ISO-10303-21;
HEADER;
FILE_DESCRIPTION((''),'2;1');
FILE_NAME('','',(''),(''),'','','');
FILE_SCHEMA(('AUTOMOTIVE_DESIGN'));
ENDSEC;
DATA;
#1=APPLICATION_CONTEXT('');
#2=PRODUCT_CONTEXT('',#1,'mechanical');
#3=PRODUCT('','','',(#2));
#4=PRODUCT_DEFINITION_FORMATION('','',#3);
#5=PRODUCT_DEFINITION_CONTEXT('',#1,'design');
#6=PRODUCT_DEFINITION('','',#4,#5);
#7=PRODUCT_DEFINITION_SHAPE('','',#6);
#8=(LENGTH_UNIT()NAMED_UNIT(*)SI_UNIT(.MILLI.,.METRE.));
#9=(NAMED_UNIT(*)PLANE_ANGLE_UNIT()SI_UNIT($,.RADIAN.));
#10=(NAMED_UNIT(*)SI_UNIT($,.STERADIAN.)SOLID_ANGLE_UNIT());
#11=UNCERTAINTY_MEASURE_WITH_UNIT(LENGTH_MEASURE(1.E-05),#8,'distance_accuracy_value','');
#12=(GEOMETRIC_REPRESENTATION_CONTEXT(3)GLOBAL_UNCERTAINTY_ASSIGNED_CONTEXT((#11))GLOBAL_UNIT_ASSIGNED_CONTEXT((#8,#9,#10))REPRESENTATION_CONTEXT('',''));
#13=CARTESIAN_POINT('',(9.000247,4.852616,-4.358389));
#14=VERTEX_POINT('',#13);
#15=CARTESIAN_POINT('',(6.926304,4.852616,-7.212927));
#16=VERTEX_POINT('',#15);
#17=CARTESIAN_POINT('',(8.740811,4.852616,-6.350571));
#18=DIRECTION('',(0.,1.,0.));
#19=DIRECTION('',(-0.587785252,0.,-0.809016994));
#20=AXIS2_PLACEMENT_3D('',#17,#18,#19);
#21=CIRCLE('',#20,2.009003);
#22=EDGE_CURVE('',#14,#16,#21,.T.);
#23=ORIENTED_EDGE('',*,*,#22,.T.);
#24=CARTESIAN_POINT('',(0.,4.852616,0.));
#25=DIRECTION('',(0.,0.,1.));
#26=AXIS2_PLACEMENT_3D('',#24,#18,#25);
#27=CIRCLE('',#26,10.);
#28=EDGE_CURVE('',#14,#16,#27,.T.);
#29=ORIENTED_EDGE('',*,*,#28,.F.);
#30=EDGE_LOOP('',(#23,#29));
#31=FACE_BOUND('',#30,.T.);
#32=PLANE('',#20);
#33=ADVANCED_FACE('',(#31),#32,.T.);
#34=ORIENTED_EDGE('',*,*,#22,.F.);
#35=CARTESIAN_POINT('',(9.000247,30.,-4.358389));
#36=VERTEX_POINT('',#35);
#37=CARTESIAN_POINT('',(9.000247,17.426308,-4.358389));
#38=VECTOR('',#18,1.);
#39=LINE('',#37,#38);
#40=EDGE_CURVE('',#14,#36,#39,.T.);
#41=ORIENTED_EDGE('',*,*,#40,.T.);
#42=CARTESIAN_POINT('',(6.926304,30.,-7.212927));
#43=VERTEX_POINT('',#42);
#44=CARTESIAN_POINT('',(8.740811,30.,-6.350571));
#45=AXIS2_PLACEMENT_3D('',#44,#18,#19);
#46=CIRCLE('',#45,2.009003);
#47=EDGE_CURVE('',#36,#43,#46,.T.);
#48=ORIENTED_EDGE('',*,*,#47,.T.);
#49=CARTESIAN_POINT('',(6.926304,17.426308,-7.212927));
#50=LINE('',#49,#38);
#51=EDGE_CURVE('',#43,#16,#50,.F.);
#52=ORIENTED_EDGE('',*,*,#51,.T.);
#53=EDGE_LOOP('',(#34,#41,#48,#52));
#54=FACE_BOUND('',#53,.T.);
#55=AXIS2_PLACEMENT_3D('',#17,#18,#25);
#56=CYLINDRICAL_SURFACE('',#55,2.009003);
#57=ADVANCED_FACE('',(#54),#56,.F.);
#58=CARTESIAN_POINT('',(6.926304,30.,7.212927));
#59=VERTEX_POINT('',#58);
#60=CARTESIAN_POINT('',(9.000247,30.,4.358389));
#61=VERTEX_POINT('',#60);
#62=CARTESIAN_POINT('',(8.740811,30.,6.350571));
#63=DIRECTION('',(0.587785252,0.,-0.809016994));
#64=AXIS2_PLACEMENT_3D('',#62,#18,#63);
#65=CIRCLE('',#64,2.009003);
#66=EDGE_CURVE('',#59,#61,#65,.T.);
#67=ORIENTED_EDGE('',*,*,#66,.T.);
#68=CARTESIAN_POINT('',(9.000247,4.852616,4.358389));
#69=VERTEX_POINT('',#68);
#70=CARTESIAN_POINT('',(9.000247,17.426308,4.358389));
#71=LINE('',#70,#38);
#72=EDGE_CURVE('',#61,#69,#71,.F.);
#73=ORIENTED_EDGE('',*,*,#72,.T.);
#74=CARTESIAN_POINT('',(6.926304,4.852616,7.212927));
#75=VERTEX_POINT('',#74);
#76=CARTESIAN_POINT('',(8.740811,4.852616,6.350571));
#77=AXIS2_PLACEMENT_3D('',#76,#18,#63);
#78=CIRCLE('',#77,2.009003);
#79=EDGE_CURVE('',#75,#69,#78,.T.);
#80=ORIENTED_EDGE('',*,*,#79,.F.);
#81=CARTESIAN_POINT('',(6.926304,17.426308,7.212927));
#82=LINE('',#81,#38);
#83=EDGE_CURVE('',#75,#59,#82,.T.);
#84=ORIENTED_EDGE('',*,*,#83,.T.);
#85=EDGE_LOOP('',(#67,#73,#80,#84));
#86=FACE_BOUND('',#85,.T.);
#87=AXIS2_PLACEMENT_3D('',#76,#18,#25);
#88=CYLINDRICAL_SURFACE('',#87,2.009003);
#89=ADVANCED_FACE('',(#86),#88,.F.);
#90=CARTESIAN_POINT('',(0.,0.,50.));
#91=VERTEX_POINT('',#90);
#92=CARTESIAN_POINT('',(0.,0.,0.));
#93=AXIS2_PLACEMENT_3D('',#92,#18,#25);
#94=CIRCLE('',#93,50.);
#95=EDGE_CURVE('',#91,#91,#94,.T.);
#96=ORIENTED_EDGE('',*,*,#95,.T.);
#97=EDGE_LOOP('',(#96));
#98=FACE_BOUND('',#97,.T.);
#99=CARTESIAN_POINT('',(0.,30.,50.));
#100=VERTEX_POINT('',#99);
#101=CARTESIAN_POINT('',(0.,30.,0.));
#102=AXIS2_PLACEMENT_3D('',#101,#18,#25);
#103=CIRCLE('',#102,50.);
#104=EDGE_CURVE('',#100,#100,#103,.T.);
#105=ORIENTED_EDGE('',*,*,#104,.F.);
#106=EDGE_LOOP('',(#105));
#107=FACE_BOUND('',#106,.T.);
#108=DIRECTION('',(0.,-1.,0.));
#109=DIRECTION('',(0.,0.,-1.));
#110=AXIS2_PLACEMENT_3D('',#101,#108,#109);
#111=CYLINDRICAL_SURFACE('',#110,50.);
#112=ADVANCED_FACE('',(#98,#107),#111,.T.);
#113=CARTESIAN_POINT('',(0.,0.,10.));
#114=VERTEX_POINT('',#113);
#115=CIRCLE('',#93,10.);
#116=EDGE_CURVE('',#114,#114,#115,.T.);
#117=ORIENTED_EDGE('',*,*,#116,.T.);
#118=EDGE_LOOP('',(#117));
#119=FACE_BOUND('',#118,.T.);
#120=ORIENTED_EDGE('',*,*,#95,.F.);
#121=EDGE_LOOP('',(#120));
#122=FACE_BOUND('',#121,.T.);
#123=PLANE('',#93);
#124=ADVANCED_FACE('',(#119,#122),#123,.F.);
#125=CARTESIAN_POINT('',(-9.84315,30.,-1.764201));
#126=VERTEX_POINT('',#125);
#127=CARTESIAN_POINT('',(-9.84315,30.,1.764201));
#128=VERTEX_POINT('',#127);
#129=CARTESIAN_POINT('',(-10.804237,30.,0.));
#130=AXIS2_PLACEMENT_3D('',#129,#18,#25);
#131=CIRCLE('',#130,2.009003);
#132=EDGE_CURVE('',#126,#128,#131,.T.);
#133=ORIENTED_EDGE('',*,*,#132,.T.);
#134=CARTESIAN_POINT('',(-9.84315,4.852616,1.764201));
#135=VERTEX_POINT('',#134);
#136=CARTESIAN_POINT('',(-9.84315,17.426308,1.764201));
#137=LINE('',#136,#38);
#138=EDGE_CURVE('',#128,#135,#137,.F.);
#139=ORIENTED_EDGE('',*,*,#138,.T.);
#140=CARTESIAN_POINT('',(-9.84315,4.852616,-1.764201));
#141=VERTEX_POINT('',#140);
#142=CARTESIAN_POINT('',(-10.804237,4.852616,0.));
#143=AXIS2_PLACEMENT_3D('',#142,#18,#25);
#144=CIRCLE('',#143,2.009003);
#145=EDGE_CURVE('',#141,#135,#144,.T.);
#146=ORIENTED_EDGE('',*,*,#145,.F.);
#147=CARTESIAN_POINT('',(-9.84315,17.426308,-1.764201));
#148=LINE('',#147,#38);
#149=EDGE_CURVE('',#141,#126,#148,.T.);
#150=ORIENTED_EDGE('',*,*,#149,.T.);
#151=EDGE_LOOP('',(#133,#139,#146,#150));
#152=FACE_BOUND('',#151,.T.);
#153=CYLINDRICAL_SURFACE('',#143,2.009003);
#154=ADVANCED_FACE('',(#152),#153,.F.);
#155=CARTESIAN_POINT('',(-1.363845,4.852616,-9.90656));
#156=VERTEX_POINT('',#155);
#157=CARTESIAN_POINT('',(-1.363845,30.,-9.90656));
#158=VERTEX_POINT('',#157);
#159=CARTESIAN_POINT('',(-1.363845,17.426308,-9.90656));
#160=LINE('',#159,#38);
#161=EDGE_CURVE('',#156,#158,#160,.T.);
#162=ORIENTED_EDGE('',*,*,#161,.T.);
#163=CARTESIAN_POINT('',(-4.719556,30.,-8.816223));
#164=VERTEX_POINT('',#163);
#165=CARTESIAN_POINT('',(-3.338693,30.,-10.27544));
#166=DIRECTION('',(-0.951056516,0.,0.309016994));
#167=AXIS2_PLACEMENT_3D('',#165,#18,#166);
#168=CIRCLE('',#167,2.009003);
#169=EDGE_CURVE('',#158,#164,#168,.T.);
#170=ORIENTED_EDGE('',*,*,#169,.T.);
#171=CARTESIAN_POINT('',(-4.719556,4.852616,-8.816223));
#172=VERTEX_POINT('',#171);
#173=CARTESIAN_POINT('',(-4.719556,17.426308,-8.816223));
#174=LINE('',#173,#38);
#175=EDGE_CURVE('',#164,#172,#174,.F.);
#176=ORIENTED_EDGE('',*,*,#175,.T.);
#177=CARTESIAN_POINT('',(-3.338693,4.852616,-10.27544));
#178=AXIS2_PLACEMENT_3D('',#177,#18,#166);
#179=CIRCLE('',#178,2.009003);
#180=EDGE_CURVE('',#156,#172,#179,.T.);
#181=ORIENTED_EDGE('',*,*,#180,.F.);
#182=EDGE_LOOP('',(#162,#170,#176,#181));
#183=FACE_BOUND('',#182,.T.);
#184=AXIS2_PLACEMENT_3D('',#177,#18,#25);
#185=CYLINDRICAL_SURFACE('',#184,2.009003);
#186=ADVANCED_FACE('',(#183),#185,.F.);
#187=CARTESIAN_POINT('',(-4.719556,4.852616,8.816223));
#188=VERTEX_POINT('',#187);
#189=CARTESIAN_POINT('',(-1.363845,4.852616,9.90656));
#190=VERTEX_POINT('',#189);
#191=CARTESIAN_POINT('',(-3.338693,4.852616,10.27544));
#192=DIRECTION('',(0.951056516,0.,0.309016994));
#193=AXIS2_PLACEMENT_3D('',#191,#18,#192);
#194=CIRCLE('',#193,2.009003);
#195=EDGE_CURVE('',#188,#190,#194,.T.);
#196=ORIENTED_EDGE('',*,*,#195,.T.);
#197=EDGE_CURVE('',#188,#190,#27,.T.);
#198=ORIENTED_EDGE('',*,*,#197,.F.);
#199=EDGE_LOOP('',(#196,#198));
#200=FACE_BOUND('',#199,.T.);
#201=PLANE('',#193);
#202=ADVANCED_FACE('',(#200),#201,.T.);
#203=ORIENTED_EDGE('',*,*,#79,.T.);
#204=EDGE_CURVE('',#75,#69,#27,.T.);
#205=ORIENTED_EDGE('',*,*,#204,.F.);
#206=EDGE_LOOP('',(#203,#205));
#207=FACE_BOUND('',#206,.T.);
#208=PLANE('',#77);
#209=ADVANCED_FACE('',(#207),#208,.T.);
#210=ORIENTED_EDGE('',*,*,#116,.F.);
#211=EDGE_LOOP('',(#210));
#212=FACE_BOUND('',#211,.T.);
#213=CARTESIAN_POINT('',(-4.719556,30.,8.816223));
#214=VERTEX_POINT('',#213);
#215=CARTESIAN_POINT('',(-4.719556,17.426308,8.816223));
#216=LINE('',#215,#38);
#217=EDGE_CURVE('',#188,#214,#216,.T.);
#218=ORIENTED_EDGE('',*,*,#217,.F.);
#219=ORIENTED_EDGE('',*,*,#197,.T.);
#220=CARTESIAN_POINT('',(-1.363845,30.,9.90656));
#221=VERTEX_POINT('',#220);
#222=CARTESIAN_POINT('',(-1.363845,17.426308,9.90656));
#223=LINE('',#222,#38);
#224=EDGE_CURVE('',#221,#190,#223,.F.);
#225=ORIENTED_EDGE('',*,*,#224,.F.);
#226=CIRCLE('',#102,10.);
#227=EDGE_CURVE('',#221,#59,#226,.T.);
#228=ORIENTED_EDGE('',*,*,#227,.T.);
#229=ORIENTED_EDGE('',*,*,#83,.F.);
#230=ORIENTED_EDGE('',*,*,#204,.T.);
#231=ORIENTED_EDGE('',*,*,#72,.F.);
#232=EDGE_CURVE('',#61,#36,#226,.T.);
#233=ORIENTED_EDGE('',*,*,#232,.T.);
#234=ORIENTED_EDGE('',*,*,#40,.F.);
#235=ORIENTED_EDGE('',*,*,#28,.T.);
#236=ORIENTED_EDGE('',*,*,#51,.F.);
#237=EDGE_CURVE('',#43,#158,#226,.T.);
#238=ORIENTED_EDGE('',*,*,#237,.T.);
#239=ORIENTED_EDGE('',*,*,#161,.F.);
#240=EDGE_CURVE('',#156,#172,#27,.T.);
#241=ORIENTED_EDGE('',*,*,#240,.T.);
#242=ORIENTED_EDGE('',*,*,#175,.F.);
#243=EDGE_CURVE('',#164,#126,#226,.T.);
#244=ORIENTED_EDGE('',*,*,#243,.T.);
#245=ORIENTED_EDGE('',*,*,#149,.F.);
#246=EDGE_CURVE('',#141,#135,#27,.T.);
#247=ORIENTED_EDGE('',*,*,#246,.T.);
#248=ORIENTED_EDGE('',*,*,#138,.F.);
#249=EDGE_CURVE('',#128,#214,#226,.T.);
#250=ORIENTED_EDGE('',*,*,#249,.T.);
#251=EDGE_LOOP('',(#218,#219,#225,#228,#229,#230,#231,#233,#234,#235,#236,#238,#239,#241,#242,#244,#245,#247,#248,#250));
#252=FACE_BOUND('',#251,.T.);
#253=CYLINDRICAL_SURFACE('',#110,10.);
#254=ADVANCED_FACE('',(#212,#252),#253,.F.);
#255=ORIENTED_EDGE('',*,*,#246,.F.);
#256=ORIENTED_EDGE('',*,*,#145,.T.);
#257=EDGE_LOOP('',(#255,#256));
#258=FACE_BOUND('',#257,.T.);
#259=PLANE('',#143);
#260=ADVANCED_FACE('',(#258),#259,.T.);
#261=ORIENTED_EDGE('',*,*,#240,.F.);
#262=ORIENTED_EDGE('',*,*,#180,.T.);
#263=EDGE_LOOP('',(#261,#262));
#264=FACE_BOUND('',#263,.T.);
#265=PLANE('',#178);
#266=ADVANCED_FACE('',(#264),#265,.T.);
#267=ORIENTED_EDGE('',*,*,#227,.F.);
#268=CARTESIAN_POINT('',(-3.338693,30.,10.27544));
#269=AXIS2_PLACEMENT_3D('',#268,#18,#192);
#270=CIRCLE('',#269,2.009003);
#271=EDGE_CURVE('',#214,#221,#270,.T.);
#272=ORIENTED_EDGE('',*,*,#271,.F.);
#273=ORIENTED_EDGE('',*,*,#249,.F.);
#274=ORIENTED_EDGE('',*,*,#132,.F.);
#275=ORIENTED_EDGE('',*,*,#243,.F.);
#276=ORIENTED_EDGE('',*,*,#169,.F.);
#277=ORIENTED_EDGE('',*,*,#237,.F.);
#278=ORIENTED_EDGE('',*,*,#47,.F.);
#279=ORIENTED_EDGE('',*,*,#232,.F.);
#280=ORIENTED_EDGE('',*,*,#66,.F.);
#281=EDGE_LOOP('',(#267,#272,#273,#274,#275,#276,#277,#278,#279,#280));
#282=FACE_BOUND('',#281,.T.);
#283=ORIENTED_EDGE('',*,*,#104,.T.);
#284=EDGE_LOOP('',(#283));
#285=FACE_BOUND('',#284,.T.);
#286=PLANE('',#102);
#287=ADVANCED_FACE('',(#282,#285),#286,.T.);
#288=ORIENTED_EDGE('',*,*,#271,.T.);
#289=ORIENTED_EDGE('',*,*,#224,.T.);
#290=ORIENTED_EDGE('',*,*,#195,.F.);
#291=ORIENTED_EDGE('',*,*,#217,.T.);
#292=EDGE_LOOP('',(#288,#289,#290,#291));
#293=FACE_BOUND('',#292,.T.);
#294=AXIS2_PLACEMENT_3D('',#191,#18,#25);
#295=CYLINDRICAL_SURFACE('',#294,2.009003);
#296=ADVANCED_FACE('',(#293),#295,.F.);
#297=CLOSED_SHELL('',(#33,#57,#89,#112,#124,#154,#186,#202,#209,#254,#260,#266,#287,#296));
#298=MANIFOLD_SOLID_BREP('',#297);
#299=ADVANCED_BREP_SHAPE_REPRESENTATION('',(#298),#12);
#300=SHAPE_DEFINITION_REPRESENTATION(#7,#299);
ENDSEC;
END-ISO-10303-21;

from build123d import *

# Parameters (mm, degrees)
SKETCH1_R           = 50
BOSS_EXTRUDE1_DEPTH = 30
SKETCH2_R           = 10
CUT_EXTRUDE1_DEPTH  = 77.811457479
SKETCH3_R           = 2.009003391
CUT_EXTRUDE2_DEPTH  = 25.147383577
CIRPATTERN1_COUNT   = 5


with BuildPart() as part:
    # Sketch1 → Boss-Extrude1 (new body)
    with BuildSketch(Plane(origin=(0, 0, 0), x_dir=(1, 0, 0), z_dir=(0, 1, 0))):
        Circle(SKETCH1_R)
    extrude(amount=BOSS_EXTRUDE1_DEPTH)

    # Sketch2 → Cut-Extrude1 (cut, through all)
    with BuildSketch(Plane(origin=(0, 0, 0), x_dir=(1, 0, 0), z_dir=(0, 1, 0))):
        Circle(SKETCH2_R)
    extrude(amount=CUT_EXTRUDE1_DEPTH, mode=Mode.SUBTRACT)

    # Sketch3 → Cut-Extrude2 (cut)
    with BuildSketch(Plane(origin=(0, 30, 0), x_dir=(1, 0, 0), z_dir=(0, 1, 0))):
        with Locations((-10.804236781, 0)):
            Circle(SKETCH3_R)
    cut_extrude2 = extrude(amount=-CUT_EXTRUDE2_DEPTH, mode=Mode.SUBTRACT)

    # CirPattern1: Cut-Extrude2 ×5 about axis
    cirpattern1_axis = Axis((0, 0, 0), (0, 1, 0))
    for i in range(1, CIRPATTERN1_COUNT):
        add(cut_extrude2.rotate(cirpattern1_axis, i * 360 / CIRPATTERN1_COUNT), mode=Mode.SUBTRACT)


solid = part.part
